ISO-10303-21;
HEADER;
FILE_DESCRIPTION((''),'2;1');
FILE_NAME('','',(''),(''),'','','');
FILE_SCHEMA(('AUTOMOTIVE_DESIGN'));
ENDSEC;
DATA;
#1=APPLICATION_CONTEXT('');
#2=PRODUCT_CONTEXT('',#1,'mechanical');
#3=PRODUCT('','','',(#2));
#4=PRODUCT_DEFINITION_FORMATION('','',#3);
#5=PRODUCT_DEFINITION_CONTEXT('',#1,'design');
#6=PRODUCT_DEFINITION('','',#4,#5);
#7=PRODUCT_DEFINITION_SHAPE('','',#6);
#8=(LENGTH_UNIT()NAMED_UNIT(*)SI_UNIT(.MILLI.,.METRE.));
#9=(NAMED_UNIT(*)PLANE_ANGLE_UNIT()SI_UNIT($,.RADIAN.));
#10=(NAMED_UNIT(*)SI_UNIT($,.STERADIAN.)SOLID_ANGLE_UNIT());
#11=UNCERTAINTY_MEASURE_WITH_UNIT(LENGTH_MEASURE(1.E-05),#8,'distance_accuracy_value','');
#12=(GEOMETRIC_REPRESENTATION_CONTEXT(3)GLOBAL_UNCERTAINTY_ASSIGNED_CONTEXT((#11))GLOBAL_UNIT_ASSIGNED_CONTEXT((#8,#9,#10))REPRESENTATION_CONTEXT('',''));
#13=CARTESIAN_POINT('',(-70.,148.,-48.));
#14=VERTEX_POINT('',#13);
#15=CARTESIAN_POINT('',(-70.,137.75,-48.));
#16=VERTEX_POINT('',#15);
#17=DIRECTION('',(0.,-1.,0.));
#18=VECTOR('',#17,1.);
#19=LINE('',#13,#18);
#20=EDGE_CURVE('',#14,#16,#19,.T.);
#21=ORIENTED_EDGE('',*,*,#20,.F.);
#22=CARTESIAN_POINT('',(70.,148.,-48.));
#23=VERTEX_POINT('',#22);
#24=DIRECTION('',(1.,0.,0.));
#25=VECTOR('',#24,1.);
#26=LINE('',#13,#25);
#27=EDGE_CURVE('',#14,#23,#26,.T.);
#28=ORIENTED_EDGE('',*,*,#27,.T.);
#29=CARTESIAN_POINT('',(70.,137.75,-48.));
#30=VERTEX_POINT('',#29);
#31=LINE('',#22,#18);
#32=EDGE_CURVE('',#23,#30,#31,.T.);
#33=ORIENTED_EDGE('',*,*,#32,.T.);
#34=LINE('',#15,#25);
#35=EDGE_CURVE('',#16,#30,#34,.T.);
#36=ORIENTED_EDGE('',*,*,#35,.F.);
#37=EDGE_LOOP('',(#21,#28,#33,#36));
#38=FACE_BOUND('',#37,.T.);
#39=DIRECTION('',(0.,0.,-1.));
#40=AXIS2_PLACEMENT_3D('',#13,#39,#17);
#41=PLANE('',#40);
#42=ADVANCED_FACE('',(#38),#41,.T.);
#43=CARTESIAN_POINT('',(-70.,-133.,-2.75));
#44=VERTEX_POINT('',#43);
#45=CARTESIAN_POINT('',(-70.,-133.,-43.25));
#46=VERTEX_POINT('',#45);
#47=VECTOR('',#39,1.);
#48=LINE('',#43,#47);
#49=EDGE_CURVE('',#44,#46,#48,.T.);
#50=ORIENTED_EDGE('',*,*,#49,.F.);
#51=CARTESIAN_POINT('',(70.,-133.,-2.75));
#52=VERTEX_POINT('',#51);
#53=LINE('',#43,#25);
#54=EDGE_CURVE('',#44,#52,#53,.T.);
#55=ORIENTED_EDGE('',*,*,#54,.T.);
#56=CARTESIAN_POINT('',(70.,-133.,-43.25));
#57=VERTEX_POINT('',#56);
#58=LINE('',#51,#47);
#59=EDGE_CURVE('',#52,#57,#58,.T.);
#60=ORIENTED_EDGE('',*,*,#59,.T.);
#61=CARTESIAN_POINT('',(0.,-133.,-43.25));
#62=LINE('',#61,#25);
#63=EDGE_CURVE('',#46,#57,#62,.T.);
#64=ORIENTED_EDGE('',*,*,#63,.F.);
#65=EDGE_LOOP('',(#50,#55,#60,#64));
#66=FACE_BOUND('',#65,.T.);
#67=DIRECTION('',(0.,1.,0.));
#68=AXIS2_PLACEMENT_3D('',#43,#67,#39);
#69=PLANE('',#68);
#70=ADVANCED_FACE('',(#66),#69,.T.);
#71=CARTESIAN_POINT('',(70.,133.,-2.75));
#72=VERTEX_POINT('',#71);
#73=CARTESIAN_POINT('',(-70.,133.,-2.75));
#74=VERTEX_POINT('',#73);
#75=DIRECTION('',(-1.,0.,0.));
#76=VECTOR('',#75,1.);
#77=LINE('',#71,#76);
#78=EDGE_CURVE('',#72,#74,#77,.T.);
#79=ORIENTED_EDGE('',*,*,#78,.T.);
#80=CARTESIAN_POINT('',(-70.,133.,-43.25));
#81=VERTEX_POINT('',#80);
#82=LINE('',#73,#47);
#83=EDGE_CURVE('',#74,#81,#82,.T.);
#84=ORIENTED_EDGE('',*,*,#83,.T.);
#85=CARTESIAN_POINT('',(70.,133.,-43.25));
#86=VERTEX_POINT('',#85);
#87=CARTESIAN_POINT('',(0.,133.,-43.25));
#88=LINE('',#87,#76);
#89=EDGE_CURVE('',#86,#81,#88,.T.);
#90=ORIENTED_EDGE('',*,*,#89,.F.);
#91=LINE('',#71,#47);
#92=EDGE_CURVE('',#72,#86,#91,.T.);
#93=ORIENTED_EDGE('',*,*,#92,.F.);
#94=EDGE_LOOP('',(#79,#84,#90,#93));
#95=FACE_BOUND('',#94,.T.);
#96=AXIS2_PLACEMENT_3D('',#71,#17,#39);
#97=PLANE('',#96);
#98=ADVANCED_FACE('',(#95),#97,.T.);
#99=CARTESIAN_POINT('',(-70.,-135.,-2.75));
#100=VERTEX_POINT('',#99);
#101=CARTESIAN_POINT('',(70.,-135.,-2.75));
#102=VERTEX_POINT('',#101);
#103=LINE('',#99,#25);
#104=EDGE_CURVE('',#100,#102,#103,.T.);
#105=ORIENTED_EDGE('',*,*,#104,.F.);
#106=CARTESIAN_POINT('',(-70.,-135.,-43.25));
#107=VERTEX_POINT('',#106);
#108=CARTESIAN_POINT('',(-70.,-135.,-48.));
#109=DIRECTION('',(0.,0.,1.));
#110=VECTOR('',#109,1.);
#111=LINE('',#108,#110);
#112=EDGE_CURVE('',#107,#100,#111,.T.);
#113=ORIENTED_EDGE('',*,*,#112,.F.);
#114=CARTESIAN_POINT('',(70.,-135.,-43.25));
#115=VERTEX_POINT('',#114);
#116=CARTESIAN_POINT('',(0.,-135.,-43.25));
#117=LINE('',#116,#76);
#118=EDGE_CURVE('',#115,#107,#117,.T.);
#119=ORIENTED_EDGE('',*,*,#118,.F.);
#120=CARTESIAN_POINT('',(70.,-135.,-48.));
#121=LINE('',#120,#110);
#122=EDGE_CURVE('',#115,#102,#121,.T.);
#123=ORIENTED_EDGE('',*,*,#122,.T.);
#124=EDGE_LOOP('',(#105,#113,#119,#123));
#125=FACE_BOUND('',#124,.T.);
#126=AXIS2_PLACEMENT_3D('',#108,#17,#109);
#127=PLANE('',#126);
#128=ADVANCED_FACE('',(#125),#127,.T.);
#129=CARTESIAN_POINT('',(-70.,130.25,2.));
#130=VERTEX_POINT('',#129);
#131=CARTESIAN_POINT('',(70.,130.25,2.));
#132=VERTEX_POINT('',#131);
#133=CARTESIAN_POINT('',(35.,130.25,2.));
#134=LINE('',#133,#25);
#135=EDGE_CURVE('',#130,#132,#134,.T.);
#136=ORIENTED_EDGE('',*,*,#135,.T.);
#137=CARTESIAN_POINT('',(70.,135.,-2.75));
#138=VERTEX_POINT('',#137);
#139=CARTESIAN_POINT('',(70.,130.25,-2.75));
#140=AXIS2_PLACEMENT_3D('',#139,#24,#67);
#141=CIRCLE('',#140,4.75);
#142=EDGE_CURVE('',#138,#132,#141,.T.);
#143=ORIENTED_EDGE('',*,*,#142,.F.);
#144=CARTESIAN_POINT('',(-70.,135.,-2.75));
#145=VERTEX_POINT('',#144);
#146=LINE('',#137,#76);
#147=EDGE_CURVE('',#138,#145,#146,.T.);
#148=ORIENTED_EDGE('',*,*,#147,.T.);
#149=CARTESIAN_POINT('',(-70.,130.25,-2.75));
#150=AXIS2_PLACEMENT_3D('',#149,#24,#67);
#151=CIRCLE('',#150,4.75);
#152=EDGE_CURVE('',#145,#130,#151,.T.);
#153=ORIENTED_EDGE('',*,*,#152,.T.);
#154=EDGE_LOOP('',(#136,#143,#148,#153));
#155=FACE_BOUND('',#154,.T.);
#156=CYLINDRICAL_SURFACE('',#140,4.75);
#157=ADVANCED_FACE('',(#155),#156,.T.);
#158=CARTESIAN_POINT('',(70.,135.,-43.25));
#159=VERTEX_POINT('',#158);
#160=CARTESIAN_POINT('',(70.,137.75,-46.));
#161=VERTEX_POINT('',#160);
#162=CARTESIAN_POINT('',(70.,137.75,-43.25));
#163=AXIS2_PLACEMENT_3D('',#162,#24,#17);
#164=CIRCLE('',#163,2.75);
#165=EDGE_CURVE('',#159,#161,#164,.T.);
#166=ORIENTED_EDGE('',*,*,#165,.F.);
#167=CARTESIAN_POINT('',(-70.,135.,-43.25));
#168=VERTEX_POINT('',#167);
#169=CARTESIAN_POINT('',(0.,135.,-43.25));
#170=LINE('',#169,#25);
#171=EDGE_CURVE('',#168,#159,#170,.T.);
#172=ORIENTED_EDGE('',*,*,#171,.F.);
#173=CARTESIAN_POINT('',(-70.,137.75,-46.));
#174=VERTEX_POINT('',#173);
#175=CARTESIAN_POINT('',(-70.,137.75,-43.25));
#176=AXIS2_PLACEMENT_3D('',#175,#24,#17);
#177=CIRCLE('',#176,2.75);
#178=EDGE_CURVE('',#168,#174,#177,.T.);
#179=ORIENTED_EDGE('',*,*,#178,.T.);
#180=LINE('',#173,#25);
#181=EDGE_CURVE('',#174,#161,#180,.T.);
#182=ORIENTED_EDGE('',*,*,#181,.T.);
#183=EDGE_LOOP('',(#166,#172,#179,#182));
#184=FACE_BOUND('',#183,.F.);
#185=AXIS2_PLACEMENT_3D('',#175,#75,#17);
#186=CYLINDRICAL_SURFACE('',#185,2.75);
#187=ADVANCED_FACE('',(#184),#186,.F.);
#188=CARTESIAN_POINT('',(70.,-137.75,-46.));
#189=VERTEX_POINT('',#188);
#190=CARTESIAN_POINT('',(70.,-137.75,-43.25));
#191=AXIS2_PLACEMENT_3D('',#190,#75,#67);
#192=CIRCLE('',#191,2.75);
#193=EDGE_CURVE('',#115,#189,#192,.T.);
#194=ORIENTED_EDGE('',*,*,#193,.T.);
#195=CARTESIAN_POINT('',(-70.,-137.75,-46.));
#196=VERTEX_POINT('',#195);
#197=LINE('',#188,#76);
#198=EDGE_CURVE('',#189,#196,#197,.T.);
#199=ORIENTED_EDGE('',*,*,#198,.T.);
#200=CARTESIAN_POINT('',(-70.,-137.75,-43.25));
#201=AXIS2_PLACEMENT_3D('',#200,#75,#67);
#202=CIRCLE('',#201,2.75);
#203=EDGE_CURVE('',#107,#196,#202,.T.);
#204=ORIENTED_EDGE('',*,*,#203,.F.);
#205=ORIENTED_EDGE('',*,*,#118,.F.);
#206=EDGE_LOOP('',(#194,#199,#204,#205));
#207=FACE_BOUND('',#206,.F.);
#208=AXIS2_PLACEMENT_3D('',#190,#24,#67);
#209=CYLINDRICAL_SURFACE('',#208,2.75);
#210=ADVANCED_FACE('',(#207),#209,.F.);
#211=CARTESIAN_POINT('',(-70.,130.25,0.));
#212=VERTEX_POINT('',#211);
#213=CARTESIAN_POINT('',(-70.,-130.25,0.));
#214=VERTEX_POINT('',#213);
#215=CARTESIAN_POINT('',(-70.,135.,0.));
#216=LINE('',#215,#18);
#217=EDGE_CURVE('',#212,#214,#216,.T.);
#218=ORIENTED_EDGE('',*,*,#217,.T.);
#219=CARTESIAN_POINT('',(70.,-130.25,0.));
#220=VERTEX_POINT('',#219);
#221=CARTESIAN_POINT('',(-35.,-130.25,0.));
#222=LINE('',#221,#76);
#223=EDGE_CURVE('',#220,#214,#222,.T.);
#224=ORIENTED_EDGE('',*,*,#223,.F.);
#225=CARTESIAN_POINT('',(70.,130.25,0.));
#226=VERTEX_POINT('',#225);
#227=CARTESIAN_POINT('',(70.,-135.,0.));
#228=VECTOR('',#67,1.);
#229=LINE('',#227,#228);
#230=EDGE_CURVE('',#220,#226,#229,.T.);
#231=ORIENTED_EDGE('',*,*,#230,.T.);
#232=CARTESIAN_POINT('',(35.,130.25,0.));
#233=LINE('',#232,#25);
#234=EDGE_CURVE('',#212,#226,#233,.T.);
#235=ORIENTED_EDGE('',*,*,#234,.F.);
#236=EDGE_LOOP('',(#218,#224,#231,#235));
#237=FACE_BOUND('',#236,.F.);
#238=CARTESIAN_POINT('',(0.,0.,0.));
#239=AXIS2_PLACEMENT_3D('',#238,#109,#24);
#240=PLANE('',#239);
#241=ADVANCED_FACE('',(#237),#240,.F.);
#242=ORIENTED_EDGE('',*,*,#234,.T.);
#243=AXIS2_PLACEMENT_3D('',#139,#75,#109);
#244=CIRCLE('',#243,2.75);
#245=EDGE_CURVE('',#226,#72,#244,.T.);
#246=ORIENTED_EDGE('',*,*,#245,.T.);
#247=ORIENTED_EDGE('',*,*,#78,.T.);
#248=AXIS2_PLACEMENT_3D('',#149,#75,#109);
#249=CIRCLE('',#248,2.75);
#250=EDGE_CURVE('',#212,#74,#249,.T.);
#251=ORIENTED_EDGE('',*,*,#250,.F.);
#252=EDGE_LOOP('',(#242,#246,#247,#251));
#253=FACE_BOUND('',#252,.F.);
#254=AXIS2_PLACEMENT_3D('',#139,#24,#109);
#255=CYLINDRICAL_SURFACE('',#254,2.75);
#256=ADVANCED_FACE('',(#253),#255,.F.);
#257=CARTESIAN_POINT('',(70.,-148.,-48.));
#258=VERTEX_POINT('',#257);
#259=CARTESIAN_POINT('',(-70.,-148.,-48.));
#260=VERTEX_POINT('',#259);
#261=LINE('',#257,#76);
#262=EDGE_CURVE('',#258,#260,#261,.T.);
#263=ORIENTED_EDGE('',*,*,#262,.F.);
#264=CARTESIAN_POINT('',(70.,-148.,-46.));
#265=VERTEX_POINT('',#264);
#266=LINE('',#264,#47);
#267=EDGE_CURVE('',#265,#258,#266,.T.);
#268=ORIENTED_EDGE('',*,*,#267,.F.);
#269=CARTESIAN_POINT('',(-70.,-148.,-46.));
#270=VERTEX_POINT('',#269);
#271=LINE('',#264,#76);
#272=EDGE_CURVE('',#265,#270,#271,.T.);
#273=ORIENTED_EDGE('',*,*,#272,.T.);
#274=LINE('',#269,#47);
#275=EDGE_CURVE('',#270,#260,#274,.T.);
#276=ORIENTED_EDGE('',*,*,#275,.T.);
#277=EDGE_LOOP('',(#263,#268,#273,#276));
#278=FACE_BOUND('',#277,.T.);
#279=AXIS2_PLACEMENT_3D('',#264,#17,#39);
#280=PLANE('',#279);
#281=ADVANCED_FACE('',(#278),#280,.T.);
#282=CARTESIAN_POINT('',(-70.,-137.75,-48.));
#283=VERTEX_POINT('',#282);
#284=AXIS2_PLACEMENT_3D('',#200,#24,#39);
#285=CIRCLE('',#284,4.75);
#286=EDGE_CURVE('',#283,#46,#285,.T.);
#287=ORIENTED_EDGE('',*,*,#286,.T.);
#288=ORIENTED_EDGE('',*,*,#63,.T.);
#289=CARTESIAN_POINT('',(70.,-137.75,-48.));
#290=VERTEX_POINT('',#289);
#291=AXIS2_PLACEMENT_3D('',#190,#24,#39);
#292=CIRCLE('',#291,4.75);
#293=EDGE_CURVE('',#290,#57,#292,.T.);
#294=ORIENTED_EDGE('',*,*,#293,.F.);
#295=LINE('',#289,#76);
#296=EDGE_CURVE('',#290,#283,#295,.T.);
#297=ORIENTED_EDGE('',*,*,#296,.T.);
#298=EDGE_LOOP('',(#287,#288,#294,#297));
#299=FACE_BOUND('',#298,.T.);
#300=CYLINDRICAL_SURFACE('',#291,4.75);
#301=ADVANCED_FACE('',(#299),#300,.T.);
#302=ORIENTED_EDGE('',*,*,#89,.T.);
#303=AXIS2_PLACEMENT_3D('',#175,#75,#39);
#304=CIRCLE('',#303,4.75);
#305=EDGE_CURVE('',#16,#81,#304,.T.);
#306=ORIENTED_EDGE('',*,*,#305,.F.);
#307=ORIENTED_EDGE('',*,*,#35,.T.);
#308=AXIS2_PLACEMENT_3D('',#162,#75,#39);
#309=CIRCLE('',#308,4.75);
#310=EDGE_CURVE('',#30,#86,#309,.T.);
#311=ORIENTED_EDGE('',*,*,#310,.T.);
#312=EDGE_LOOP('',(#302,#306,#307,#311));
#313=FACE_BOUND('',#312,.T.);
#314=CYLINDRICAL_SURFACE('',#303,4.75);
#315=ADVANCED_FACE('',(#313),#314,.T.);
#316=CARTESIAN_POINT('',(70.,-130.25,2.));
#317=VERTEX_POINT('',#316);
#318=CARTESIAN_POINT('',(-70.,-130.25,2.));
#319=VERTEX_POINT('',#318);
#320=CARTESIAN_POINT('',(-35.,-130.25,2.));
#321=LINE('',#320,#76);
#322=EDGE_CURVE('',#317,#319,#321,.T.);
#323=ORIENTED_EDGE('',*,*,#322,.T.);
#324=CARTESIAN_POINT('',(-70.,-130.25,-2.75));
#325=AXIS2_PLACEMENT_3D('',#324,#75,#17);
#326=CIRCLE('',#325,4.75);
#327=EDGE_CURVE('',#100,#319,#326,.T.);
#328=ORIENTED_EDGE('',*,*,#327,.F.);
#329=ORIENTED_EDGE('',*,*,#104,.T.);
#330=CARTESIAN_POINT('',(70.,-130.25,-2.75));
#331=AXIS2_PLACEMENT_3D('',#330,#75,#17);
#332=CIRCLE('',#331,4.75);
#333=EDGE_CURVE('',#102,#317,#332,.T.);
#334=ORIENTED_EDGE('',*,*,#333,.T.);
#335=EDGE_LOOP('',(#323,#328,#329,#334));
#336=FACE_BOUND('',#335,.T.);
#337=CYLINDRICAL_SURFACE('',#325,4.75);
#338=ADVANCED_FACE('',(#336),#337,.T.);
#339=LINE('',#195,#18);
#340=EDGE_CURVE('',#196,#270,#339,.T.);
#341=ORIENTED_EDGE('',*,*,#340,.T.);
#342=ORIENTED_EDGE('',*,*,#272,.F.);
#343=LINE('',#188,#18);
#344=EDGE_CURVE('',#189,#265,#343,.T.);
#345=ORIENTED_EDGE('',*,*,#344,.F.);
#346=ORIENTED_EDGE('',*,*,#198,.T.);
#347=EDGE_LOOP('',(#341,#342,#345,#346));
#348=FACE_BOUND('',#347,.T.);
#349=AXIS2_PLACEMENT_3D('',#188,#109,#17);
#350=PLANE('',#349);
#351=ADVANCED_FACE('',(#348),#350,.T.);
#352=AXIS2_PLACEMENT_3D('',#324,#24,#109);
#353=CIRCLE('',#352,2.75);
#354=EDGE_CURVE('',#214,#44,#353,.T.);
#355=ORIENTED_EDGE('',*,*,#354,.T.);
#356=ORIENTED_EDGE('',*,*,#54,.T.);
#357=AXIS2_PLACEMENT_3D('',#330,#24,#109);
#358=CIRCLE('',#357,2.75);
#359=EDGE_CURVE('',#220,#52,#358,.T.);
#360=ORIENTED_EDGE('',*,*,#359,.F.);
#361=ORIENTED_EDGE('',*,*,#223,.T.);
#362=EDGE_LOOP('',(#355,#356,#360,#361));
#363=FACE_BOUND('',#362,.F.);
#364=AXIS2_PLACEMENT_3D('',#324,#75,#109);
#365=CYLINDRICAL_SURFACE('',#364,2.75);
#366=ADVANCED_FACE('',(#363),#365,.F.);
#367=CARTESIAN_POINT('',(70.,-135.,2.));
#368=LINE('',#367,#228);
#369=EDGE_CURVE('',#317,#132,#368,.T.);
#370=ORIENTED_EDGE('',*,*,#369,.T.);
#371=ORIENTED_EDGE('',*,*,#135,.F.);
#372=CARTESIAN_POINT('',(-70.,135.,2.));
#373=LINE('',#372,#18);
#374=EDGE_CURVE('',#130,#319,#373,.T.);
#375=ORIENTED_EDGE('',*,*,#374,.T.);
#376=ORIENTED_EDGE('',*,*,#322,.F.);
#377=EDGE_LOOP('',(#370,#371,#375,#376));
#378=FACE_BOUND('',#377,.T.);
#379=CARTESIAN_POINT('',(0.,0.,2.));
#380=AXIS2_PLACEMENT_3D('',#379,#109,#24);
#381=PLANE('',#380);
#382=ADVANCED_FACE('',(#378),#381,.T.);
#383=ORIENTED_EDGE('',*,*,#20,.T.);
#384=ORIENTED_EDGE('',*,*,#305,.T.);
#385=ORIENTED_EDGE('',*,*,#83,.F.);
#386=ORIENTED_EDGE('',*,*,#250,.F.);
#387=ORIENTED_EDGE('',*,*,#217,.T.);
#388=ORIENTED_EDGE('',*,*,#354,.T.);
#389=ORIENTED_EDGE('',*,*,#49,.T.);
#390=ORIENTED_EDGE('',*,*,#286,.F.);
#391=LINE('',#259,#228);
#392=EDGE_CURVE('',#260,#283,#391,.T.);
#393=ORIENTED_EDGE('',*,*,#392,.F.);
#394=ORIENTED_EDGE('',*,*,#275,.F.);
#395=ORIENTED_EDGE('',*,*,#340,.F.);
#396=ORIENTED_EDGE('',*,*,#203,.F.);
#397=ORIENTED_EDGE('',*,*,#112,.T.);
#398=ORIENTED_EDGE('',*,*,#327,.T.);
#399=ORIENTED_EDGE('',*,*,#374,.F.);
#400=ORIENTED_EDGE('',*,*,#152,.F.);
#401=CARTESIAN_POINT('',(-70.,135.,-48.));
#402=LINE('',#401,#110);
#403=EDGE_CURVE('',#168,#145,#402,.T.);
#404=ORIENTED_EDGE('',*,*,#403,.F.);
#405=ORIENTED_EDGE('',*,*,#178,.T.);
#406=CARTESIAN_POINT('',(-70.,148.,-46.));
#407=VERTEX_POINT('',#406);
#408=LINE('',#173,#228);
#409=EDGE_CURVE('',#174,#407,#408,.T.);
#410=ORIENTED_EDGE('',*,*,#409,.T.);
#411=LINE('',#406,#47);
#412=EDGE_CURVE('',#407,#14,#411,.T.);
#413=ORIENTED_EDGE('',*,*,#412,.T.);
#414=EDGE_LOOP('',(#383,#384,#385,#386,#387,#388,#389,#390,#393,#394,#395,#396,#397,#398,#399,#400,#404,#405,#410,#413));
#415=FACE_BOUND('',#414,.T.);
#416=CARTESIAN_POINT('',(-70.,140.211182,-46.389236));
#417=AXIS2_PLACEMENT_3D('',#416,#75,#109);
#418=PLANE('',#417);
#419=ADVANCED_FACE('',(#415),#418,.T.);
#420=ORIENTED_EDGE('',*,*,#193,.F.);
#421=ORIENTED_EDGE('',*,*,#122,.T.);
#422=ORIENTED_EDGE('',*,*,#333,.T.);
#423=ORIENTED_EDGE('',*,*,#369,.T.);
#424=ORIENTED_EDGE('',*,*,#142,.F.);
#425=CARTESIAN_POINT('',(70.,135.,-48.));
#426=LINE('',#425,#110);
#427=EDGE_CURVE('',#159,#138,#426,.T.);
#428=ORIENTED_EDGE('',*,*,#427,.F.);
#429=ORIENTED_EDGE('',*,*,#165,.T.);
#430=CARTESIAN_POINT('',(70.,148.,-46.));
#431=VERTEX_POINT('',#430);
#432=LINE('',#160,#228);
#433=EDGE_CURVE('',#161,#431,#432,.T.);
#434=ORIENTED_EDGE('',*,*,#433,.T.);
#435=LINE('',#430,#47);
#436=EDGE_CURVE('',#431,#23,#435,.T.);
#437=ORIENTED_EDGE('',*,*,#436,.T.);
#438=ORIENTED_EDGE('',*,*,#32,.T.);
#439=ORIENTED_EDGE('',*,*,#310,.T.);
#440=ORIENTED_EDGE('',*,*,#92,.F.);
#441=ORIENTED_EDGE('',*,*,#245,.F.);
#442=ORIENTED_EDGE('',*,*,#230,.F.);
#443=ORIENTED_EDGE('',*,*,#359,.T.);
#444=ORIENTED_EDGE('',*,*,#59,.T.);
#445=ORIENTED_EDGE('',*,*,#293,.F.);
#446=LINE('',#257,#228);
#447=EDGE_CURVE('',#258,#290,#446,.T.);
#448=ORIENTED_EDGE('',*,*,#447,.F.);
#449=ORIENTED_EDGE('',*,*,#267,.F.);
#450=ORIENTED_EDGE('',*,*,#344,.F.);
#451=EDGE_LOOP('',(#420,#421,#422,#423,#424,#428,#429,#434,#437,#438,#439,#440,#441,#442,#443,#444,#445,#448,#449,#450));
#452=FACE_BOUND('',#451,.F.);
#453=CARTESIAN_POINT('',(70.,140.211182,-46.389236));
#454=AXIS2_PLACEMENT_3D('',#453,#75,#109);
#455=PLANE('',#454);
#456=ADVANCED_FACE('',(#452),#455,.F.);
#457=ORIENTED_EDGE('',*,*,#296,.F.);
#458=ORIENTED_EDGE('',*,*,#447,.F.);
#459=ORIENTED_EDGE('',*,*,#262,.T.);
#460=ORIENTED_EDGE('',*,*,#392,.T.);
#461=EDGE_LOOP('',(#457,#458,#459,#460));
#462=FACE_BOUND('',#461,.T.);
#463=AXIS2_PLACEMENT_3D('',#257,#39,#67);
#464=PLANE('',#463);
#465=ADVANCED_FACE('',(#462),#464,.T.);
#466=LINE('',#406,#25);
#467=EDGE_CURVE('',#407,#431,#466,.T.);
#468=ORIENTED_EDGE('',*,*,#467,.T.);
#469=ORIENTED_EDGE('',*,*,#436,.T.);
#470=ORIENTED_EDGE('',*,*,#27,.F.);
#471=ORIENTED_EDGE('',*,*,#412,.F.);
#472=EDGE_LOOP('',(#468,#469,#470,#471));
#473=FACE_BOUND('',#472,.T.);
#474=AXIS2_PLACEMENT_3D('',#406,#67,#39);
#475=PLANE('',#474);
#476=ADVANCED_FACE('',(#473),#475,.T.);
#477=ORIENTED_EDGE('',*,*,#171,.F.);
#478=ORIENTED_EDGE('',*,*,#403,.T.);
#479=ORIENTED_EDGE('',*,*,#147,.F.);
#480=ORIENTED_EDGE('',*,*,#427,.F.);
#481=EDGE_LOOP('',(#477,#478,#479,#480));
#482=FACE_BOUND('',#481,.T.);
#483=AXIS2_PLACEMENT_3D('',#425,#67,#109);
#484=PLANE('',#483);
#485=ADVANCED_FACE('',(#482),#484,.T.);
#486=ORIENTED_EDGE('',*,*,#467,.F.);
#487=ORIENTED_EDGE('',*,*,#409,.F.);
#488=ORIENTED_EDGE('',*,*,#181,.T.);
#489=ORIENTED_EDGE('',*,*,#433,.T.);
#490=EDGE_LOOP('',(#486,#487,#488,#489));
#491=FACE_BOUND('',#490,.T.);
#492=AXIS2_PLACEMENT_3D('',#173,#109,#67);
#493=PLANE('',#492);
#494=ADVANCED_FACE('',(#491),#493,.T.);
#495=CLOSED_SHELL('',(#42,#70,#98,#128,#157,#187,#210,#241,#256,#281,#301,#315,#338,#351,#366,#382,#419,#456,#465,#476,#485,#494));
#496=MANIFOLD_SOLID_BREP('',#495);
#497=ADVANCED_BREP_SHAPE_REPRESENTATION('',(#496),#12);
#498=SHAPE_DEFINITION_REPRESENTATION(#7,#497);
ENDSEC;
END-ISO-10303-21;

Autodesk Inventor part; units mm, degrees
ref_plane "YZ Plane" through (0, 0, 0) normal (1, 0, 0) x (0, 1, 0)
ref_plane "XZ Plane" through (0, 0, 0) normal (0, 1, 0) x (-1, 0, 0)
ref_plane "XY Plane" through (0, 0, 0) normal (0, 0, 1) x (1, 0, 0)
sketch "Sketch1" plane through (0, 0, 0) normal (0, 0, 1) x (1, 0, 0)
  line L0 (-70, -135) -> (70, -135)
  line L1 (70, -135) -> (70, 135)
  line L2 (70, 135) -> (-70, 135)
  line L3 (-70, 135) -> (-70, -135)
  line L4 (-70, -135) -> (70, 135) construction
  line L5 (70, -135) -> (-70, 135) construction
  point P0 (0, 0)
  dimension "d0" = 140
  dimension "d1" = 270
extrude "Plate1" add sketch "Sketch1" along normal blind 2
sketch "Sketch3" plane through (70, 133, 2) normal (0, 1, 0) x (-1, 0, 0)
  line L0 (140, 0) -> (0, 0)
  line L1 (0, 0) -> (0, -50)
  line L2 (0, -50) -> (140, -50)
  line L3 (140, -50) -> (140, 0)
edge flange "Flange1" height 50 angle 90 thickness 2 bend radius 2.75 thickness toward (0, 1, 0) relief round relief width 2 relief depth 1 corner gap 2.75 corner form 0 edges at (0, 135, 0) (0, -135, 0) wall of the first edge with corners at (-70, 133, 2) (70, 133, 2) (70, 133, -48) (-70, 133, -48)
bend "Bend1"
corner "Corner1"
sketch "Sketch4" plane through (-70, 133, -46) normal (0, 0, -1) x (-1, 0, 0)
  line L0 (-140, 0) -> (0, 0)
  line L1 (0, 0) -> (0, 15)
  line L2 (0, 15) -> (-140, 15)
  line L3 (-140, 15) -> (-140, 0)
edge flange "Flange2" height 15 angle 90 thickness 2 bend radius 2.75 thickness toward (0, 0, -1) relief round relief width 2 relief depth 1 corner gap 2.75 corner form 0 edges at (0, 135, -48) (0, -135, -48) wall of the first edge with corners at (70, 133, -46) (-70, 133, -46) (-70, 148, -46) (70, 148, -46)
bend "Bend2"
corner "Corner2"
equation "\"d2\" = Thickness"
equation "\"d6\" = BendReliefWidth"
equation "\"d7\" = BendReliefDepth"
equation "\"d8\" = MinimumRemnant"
equation "\"d9\" = TransitionRadius"
equation "\"d12\" = BendRadius"
equation "\"d13\" = CornerReliefSize"
equation "\"d14\" = GapSize"
equation "\"d15\" = JacobiRadiusSize"
equation "\"d16\" = BendReliefWidth"
equation "\"d17\" = BendReliefDepth"
equation "\"d18\" = MinimumRemnant"
equation "\"d19\" = TransitionRadius"
equation "\"d22\" = BendRadius"
equation "\"d23\" = CornerReliefSize"
equation "\"d24\" = GapSize"
equation "\"d25\" = JacobiRadiusSize"
equation "\"BendReliefWidth\" = Thickness"
equation "\"BendReliefDepth\" = 0.5 * Thickness"
equation "\"CornerReliefSize\" = 4 * Thickness"
equation "\"MinimumRemnant\" = 2 * Thickness"
equation "\"TransitionRadius\" = BendRadius"
equation "\"JacobiRadiusSize\" = BendRadius"
equation "\"GapSize\" = Thickness"
equation "\"Thickness\" = 2"
equation "\"BendRadius\" = 2.75"
properties part number "BSH pollar 5" material "Stainless Steel"
